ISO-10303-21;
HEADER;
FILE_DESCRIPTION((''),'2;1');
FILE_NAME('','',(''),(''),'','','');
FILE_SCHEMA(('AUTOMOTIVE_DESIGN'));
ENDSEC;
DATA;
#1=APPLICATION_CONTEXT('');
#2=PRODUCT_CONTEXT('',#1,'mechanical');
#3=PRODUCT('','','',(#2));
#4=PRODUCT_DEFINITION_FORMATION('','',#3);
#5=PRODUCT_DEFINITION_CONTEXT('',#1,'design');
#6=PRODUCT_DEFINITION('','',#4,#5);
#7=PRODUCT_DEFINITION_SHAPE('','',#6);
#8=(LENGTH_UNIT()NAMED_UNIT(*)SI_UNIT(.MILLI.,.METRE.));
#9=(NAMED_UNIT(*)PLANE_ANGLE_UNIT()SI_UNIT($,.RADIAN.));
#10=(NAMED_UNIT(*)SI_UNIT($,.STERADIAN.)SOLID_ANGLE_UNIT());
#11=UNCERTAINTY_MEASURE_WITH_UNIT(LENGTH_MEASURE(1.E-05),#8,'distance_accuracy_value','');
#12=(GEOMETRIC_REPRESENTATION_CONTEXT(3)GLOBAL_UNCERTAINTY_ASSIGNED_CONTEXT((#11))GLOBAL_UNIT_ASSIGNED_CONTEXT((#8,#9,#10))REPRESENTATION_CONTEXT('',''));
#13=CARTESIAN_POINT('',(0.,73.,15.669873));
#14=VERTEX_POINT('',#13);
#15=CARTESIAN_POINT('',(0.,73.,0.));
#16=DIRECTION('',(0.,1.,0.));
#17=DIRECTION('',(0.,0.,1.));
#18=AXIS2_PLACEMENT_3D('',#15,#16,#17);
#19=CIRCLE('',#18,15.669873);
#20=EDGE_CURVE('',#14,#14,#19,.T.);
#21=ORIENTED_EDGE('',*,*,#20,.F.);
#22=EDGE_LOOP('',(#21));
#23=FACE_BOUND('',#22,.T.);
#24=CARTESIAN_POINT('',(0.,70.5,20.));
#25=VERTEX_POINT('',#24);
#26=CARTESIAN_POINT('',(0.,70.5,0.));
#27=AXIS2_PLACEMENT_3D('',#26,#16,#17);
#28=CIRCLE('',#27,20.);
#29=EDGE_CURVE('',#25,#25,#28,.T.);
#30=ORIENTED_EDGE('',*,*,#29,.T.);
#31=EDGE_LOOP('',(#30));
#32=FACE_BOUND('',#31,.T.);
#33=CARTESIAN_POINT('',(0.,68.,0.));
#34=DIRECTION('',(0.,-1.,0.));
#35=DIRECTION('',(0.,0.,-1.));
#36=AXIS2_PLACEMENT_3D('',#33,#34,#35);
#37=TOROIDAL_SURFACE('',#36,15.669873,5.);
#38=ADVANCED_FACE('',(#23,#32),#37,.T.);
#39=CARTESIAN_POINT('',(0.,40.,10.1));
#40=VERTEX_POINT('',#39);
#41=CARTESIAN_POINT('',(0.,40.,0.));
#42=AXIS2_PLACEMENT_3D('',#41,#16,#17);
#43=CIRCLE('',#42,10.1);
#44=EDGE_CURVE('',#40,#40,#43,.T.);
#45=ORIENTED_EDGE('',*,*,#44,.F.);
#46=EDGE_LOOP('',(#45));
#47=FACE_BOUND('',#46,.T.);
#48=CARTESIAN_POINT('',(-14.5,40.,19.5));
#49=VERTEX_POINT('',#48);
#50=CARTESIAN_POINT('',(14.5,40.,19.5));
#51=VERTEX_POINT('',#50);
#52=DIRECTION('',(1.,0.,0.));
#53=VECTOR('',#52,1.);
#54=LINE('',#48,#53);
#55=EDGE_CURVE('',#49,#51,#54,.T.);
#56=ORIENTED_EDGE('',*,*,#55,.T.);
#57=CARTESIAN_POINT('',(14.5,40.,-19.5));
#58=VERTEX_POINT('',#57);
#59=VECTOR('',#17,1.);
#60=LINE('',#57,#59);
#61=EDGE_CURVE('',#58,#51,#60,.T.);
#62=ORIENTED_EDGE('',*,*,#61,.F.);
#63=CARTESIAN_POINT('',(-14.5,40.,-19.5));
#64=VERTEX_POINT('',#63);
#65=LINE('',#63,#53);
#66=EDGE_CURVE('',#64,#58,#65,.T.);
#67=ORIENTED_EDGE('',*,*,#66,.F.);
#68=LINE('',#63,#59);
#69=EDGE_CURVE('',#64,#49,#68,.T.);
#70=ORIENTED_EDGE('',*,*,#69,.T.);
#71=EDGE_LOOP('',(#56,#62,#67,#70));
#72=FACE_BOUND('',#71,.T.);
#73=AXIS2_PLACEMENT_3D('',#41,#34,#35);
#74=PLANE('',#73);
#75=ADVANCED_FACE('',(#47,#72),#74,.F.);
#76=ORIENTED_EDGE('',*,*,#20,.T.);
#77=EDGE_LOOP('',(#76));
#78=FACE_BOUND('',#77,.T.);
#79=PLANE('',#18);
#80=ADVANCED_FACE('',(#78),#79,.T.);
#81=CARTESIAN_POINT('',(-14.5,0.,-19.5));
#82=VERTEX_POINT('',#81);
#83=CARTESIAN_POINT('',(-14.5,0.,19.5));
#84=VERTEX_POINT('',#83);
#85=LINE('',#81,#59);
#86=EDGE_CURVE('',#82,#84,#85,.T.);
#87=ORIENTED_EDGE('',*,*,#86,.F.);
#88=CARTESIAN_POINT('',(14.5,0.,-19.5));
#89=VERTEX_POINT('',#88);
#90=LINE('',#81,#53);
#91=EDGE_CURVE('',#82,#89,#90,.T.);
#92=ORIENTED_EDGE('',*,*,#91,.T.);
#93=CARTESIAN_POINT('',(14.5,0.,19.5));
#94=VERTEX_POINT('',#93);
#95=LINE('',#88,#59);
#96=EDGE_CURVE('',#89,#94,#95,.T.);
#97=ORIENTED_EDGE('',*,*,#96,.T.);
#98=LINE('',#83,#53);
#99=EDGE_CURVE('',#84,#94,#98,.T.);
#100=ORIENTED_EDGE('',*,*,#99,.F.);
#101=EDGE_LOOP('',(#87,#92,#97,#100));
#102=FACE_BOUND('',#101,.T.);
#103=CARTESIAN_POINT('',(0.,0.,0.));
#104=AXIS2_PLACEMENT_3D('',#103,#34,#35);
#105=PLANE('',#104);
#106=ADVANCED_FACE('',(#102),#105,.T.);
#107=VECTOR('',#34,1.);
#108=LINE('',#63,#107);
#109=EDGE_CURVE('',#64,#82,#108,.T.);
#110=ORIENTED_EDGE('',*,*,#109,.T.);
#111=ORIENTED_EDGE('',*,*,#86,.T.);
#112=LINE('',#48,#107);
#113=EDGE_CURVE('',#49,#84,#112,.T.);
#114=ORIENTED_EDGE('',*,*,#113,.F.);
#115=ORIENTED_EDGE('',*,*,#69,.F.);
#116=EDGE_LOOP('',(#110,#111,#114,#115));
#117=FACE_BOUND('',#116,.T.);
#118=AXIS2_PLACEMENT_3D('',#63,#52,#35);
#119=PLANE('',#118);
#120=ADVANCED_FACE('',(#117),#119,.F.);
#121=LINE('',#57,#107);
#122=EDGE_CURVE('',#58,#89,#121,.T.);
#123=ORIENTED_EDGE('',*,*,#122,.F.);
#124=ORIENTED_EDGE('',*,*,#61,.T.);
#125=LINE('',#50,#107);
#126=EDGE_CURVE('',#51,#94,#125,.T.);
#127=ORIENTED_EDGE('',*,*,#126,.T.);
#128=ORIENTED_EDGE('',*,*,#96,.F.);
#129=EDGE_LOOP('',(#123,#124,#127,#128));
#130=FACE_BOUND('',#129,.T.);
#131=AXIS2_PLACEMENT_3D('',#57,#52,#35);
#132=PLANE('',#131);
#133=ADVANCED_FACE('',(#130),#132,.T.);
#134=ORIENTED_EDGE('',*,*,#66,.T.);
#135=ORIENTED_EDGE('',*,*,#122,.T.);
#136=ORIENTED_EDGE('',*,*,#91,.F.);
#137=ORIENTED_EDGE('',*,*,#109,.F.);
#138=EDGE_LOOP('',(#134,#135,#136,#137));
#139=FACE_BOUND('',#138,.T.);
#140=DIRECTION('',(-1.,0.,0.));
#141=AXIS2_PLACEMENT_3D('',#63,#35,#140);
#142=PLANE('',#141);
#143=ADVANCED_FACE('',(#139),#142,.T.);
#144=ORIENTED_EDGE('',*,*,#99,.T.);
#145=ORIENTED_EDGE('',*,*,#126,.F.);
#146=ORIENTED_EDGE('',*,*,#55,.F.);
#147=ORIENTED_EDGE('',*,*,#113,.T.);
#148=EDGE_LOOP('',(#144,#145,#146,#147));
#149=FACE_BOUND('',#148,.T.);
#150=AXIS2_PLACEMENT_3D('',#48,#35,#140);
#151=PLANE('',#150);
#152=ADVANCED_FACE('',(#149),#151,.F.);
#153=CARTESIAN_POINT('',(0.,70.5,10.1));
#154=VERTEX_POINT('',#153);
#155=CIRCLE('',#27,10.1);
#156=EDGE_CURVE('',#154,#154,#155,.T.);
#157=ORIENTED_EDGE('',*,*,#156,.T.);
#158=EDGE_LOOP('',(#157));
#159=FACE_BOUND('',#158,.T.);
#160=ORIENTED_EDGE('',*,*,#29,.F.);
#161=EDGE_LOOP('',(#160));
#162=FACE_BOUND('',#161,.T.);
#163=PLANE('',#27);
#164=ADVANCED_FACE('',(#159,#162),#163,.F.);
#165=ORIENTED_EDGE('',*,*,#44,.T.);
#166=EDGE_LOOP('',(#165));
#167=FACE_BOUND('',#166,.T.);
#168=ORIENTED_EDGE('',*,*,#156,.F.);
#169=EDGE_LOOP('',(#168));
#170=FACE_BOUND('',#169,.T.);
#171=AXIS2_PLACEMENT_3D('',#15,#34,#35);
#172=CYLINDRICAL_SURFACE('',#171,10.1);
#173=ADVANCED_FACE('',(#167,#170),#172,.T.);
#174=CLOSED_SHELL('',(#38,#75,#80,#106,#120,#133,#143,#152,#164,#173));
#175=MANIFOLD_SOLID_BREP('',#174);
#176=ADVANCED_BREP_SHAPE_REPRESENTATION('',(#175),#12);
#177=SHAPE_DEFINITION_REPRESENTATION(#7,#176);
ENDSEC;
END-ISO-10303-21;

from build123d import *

# Parameters (mm, degrees)
SKETCH1_W           = 29
SKETCH1_H           = 39
BOSS_EXTRUDE1_DEPTH = 40
SKETCH2_R           = 10.1
BOSS_EXTRUDE2_DEPTH = 33
SKETCH3_R           = 20
BOSS_EXTRUDE3_DEPTH = 2.5
FILLET1_R           = 5


with BuildPart() as part:
    # Sketch1 → Boss-Extrude1 (new body)
    with BuildSketch(Plane(origin=(0, 0, 0), x_dir=(1, 0, 0), z_dir=(0, 1, 0))):
        Rectangle(SKETCH1_W, SKETCH1_H)
    extrude(amount=BOSS_EXTRUDE1_DEPTH)

    # Sketch2 → Boss-Extrude2 (add)
    with BuildSketch(Plane(origin=(0, 40, 0), x_dir=(1, 0, 0), z_dir=(0, 1, 0))):
        with Locations(Location((0, 0, 0), (0, 0, 270))):
            Circle(SKETCH2_R)
    extrude(amount=BOSS_EXTRUDE2_DEPTH)

    # Sketch3 → Boss-Extrude3 (add)
    with BuildSketch(Plane(origin=(0, 73, 0), x_dir=(1, 0, 0), z_dir=(0, 1, 0))):
        with Locations(Location((0, 0, 0), (0, 0, 270))):
            Circle(SKETCH3_R)
    extrude(amount=-BOSS_EXTRUDE3_DEPTH)

    # Fillet1
    # the kernel refuses this fillet: 5 mm, written as the material it takes off along each edge
    with BuildSketch(Plane(origin=(0, 73, 0), x_dir=(0, 0, 1), z_dir=(-1, 0, 0))) as fillet1_piece_1:
        with BuildLine():
            CenterArc((15.669872981, -5), FILLET1_R, 30, 60)
            Line((15.669872981, 0), (15.669872981, 0.1))
            Line((15.669872981, 0.1), (20, 0.1))
            Line((20, 0.1), (20.1, 0))
            ThreePointArc((20.1, 0), (20.1, -1.25), (20.08660254, -2.45))
            Line((20.08660254, -2.45), (20, -2.5))
        make_face()
    revolve(axis=Axis((0, 73, 0), (0, 1, 0)), mode=Mode.SUBTRACT)


solid = part.part
